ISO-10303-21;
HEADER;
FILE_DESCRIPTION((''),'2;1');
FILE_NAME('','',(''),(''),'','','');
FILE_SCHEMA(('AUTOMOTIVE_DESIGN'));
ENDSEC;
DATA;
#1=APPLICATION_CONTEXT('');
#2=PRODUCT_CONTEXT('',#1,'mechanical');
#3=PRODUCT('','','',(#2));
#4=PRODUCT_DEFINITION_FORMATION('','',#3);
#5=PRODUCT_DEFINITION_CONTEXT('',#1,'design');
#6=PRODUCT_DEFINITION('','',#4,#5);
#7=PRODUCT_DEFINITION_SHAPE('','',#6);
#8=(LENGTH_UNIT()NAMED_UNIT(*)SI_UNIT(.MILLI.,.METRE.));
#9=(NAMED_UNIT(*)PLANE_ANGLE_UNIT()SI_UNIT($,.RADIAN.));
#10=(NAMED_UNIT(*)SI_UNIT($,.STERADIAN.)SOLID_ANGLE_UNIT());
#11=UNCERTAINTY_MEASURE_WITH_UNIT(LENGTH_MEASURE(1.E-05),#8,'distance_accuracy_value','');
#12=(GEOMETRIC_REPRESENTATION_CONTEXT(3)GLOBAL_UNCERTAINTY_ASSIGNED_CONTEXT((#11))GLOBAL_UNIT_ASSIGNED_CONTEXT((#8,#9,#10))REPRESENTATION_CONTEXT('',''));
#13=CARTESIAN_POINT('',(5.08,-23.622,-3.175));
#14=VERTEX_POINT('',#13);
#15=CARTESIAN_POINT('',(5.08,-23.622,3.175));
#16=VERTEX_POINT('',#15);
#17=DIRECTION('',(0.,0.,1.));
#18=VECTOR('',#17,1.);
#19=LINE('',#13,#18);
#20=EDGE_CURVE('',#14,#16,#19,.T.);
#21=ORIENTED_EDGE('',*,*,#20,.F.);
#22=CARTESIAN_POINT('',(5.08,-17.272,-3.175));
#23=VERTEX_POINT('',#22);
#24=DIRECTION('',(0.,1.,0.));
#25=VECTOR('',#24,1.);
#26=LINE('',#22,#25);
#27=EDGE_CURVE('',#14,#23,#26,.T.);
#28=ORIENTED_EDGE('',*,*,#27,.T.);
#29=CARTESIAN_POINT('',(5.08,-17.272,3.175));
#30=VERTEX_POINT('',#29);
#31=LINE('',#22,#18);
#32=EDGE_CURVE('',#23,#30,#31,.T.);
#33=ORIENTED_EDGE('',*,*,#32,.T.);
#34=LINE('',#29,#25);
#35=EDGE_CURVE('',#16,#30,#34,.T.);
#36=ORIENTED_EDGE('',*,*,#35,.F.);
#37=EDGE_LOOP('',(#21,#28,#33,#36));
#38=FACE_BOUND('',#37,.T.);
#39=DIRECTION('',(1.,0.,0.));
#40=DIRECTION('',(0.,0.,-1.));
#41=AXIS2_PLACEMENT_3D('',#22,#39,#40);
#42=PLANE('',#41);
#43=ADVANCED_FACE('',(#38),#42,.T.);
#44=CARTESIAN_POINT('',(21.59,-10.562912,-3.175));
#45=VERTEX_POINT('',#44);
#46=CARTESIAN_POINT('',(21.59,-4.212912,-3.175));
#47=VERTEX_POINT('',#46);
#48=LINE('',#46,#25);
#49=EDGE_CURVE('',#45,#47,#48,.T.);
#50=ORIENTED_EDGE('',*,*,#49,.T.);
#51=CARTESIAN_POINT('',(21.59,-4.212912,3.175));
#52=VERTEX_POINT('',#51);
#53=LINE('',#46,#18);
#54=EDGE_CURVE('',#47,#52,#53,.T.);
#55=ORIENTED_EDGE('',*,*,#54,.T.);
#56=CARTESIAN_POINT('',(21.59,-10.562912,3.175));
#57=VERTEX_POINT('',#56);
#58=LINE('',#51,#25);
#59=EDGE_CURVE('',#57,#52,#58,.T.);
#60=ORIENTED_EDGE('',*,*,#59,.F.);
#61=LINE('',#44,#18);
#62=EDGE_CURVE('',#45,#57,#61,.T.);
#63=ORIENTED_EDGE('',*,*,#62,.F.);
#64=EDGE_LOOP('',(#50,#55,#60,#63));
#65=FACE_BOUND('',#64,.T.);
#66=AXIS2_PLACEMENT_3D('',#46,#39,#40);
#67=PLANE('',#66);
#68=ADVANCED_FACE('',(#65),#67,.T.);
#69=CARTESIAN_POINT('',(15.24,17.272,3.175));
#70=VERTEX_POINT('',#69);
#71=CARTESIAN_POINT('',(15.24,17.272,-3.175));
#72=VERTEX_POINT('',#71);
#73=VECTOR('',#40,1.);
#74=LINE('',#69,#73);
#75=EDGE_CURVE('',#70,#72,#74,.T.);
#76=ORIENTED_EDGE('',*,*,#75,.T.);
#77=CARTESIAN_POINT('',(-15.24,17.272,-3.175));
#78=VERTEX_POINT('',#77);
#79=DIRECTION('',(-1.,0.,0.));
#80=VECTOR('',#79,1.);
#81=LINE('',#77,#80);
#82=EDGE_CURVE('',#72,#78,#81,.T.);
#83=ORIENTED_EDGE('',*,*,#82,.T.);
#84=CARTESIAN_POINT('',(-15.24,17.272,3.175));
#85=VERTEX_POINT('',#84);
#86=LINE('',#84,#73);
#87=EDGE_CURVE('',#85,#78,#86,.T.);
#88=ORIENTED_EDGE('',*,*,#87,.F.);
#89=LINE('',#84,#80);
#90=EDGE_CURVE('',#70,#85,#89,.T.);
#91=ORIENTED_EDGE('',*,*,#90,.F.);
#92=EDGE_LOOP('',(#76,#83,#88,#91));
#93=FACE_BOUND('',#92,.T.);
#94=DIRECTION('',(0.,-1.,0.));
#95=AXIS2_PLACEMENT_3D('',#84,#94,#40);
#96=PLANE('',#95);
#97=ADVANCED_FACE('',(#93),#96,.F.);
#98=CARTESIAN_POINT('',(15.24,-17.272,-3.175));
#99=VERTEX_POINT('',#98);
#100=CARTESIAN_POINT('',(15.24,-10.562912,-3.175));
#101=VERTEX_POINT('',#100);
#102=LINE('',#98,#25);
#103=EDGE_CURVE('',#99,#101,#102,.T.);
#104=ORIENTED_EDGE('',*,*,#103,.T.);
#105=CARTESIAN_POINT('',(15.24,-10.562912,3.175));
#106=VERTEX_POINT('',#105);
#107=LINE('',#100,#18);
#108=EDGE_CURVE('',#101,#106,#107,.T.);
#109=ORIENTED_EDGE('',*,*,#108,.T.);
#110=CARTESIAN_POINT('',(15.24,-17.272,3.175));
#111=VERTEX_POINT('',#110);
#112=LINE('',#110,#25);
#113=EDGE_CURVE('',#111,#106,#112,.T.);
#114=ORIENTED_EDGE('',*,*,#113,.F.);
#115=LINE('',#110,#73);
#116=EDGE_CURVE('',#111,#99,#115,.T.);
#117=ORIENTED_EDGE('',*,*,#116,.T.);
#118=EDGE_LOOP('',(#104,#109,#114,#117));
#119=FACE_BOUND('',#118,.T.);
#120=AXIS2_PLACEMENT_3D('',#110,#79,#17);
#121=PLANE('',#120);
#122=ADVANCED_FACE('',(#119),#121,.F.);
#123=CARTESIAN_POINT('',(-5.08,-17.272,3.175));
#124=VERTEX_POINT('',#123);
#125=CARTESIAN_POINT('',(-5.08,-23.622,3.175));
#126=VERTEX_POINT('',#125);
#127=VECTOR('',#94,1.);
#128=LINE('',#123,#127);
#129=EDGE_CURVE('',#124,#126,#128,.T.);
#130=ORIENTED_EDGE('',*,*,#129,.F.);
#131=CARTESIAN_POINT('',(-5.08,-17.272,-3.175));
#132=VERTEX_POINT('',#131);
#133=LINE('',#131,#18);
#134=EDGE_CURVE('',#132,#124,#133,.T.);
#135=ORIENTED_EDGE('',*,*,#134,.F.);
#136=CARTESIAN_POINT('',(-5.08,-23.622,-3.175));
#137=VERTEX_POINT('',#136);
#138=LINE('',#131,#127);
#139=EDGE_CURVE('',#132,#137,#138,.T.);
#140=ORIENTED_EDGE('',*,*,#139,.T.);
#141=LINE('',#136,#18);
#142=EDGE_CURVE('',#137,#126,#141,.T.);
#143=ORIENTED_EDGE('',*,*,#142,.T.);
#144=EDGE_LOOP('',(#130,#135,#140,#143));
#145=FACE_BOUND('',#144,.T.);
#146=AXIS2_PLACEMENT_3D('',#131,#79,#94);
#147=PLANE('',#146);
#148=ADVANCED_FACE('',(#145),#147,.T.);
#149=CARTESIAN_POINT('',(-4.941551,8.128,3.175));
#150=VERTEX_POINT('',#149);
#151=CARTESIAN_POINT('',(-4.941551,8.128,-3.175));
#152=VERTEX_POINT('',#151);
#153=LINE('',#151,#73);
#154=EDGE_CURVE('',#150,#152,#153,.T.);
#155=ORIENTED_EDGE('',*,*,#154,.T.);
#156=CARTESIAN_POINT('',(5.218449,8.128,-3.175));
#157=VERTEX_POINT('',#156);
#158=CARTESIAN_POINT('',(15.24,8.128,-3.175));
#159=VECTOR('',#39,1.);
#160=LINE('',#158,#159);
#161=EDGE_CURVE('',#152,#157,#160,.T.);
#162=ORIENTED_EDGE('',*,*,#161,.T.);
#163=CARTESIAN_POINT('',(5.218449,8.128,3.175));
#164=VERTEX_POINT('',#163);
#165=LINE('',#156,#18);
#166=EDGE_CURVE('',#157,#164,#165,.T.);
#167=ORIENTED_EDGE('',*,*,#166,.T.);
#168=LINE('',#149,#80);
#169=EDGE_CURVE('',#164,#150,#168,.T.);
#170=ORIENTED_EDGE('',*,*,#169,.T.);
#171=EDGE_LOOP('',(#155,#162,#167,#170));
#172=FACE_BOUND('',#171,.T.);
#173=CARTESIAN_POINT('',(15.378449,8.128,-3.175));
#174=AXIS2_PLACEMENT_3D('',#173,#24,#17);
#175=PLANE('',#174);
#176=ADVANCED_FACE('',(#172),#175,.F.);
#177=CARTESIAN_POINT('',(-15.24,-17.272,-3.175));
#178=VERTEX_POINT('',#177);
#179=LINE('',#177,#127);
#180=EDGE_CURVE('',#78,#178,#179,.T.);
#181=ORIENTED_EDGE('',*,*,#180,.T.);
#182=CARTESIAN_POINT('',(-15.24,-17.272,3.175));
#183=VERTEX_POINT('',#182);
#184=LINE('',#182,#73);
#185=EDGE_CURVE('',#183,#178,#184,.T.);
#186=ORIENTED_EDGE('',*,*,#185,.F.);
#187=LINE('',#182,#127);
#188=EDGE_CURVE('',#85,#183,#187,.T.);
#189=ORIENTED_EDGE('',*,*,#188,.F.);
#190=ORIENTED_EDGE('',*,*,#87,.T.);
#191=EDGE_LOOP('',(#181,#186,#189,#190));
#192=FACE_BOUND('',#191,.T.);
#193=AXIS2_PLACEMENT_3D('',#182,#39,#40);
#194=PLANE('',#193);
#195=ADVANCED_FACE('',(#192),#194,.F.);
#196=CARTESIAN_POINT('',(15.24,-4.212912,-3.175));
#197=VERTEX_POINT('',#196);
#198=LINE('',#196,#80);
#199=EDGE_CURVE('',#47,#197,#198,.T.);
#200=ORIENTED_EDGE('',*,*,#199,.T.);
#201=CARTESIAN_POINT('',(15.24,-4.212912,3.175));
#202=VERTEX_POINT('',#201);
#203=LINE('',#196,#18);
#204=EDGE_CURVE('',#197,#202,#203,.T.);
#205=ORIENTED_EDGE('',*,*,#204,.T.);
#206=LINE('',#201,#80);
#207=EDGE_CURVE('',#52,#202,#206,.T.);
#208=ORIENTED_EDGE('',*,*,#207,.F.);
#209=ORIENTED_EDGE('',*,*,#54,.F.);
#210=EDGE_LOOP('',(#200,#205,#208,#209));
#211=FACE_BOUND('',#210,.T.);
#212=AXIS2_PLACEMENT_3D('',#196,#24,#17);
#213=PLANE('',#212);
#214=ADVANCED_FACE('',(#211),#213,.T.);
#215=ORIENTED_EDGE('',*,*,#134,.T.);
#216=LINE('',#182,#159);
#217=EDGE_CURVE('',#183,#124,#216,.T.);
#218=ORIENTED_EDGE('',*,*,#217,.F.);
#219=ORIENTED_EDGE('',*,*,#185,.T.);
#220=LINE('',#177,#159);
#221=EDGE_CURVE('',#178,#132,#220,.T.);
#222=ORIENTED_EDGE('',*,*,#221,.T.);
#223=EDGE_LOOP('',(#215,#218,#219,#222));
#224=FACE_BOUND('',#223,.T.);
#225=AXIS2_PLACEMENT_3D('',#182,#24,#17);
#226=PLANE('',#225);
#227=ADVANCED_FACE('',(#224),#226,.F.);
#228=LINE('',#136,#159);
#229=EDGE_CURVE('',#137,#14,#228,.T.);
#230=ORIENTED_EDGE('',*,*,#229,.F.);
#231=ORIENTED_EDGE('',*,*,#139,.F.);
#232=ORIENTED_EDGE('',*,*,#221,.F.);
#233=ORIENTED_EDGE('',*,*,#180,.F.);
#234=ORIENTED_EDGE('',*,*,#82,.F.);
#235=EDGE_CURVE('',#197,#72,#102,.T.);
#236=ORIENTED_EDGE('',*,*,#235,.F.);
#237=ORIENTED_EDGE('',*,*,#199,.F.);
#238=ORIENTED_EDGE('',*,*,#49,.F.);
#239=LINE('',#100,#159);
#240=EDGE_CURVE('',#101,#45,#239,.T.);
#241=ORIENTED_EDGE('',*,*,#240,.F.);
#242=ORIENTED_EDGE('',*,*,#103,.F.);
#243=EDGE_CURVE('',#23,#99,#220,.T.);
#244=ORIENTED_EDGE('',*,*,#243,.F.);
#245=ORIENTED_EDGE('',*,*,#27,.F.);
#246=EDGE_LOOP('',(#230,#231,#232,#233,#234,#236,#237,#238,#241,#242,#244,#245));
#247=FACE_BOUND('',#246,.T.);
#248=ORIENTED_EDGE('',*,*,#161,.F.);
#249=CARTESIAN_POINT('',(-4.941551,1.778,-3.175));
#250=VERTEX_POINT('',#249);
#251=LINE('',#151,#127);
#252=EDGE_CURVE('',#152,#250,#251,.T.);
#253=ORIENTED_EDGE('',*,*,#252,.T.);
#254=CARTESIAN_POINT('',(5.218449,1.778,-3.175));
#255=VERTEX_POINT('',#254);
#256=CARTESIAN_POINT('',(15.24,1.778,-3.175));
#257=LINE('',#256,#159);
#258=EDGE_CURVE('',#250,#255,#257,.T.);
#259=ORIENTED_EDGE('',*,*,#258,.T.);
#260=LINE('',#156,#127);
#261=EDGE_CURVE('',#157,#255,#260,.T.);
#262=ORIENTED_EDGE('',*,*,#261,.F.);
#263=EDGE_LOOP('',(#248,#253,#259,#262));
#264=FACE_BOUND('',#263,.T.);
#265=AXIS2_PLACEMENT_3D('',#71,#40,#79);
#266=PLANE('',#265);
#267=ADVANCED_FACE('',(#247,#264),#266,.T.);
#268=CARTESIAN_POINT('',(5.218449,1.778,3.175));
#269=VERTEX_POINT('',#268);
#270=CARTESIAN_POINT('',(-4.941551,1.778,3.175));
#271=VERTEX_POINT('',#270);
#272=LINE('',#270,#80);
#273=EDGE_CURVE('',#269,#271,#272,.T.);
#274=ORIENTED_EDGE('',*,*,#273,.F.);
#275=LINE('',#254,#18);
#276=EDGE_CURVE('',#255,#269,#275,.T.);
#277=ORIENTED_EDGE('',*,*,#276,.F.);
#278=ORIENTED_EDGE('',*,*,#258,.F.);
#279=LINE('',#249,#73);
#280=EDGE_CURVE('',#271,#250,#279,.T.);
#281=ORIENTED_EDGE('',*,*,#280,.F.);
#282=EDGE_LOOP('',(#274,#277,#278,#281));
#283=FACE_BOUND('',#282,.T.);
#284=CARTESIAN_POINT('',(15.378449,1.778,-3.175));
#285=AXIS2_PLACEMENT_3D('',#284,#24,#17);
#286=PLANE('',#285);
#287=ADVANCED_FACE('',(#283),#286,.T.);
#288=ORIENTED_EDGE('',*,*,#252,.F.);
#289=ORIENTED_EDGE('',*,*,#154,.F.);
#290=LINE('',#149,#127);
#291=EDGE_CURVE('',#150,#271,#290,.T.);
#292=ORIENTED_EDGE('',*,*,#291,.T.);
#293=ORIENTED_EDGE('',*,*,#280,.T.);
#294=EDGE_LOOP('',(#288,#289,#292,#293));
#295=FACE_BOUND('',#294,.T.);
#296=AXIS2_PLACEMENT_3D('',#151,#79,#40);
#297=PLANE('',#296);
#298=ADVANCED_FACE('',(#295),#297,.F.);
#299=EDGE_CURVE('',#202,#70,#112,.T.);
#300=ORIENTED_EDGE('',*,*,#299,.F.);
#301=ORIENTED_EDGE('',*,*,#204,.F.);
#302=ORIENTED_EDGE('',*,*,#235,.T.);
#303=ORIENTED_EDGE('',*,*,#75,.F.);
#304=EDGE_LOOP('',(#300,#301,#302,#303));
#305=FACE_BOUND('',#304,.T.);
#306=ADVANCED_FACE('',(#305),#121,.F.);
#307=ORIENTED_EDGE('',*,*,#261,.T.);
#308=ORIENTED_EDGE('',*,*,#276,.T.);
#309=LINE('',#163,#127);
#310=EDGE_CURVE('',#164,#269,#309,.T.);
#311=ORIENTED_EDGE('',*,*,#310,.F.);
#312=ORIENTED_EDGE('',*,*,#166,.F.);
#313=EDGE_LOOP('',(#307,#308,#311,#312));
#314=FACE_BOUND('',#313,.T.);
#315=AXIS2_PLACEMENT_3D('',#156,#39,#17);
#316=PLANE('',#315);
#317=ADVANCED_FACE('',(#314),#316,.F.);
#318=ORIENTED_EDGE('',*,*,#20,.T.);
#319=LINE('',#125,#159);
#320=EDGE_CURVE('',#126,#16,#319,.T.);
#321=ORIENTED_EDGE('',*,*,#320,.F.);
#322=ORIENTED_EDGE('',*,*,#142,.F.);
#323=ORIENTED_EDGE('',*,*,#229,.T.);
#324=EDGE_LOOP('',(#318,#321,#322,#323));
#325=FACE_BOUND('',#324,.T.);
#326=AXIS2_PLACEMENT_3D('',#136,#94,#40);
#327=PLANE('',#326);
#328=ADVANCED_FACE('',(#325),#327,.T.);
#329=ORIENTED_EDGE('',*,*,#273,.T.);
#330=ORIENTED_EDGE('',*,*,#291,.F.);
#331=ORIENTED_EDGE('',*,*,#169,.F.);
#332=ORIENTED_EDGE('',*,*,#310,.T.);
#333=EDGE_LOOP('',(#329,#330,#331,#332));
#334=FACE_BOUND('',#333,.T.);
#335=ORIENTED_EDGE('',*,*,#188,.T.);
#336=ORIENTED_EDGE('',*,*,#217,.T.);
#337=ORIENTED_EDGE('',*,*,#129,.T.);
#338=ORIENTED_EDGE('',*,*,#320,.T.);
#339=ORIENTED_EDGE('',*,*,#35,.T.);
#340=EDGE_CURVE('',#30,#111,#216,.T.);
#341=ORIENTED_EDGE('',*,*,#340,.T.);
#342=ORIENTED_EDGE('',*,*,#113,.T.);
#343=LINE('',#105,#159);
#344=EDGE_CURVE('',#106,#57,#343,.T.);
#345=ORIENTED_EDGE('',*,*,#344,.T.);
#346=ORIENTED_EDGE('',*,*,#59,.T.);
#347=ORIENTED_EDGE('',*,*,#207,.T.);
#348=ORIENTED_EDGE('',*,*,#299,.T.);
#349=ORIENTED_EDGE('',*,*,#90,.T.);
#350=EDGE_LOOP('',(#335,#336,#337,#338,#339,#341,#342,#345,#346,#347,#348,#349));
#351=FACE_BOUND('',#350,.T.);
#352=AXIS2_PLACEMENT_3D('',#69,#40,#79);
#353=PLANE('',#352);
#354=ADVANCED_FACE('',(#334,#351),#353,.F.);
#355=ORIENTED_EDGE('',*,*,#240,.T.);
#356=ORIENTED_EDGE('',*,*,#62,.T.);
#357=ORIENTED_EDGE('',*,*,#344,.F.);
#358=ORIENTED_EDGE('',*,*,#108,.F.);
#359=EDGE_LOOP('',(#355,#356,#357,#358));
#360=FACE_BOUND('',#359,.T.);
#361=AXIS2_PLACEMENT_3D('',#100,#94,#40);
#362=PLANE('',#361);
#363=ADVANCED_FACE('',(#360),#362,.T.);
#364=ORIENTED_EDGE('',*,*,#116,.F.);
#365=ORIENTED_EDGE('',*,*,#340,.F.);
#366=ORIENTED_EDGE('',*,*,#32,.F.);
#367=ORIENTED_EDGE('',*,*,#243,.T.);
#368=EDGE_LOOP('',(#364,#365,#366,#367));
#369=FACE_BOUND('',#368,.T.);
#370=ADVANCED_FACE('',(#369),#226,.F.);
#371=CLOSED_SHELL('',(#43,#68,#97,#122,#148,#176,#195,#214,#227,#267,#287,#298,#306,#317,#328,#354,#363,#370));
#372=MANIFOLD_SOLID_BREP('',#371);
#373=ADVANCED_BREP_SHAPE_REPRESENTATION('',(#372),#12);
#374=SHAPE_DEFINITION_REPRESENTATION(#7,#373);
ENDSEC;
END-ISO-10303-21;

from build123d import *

# Parameters (mm, degrees)
SKETCH1_W           = 30.48
SKETCH1_H           = 34.544
BOSS_EXTRUDE1_DEPTH = 3.175
SKETCH2_W           = 6.35
SKETCH2_H           = 6.35
BOSS_EXTRUDE2_DEPTH = 6.35
SKETCH5_W           = 10.16
SKETCH5_H           = 6.35
BOSS_EXTRUDE4_DEPTH = 6.35
CAVITY1_START       = 1.778
CAVITY1_OUTLINE_W   = 10.16
CAVITY1_OUTLINE_H   = 6.35
CAVITY1_DEPTH       = 6.35


# Read off the part's stored shape, not the designer's step: Cavity1
with BuildPart() as part:
    # Sketch1 → Boss-Extrude1 (new, symmetric)
    with BuildSketch(Plane.XY):
        Rectangle(SKETCH1_W, SKETCH1_H)
    extrude(amount=BOSS_EXTRUDE1_DEPTH, both=True)

    # Sketch2 → Boss-Extrude2 (add)
    with BuildSketch(Plane.XY.offset(3.175)):
        with Locations((18.415, -7.387912323)):
            Rectangle(SKETCH2_W, SKETCH2_H)
    extrude(amount=-BOSS_EXTRUDE2_DEPTH)

    # Sketch5 → Boss-Extrude4 (add)
    with BuildSketch(Plane.XY.offset(3.175)):
        with Locations((0, -20.447)):
            Rectangle(SKETCH5_W, SKETCH5_H)
    extrude(amount=-BOSS_EXTRUDE4_DEPTH)

    # Cavity1 outline → Cavity1 (cut)
    with BuildSketch(Plane(origin=(0, 0, 0), x_dir=(1, 0, 0), z_dir=(0, 1, 0)).offset(CAVITY1_START)):
        with Locations((0.138449205, 0)):
            Rectangle(CAVITY1_OUTLINE_W, CAVITY1_OUTLINE_H)
    extrude(amount=CAVITY1_DEPTH, mode=Mode.SUBTRACT)


solid = part.part
